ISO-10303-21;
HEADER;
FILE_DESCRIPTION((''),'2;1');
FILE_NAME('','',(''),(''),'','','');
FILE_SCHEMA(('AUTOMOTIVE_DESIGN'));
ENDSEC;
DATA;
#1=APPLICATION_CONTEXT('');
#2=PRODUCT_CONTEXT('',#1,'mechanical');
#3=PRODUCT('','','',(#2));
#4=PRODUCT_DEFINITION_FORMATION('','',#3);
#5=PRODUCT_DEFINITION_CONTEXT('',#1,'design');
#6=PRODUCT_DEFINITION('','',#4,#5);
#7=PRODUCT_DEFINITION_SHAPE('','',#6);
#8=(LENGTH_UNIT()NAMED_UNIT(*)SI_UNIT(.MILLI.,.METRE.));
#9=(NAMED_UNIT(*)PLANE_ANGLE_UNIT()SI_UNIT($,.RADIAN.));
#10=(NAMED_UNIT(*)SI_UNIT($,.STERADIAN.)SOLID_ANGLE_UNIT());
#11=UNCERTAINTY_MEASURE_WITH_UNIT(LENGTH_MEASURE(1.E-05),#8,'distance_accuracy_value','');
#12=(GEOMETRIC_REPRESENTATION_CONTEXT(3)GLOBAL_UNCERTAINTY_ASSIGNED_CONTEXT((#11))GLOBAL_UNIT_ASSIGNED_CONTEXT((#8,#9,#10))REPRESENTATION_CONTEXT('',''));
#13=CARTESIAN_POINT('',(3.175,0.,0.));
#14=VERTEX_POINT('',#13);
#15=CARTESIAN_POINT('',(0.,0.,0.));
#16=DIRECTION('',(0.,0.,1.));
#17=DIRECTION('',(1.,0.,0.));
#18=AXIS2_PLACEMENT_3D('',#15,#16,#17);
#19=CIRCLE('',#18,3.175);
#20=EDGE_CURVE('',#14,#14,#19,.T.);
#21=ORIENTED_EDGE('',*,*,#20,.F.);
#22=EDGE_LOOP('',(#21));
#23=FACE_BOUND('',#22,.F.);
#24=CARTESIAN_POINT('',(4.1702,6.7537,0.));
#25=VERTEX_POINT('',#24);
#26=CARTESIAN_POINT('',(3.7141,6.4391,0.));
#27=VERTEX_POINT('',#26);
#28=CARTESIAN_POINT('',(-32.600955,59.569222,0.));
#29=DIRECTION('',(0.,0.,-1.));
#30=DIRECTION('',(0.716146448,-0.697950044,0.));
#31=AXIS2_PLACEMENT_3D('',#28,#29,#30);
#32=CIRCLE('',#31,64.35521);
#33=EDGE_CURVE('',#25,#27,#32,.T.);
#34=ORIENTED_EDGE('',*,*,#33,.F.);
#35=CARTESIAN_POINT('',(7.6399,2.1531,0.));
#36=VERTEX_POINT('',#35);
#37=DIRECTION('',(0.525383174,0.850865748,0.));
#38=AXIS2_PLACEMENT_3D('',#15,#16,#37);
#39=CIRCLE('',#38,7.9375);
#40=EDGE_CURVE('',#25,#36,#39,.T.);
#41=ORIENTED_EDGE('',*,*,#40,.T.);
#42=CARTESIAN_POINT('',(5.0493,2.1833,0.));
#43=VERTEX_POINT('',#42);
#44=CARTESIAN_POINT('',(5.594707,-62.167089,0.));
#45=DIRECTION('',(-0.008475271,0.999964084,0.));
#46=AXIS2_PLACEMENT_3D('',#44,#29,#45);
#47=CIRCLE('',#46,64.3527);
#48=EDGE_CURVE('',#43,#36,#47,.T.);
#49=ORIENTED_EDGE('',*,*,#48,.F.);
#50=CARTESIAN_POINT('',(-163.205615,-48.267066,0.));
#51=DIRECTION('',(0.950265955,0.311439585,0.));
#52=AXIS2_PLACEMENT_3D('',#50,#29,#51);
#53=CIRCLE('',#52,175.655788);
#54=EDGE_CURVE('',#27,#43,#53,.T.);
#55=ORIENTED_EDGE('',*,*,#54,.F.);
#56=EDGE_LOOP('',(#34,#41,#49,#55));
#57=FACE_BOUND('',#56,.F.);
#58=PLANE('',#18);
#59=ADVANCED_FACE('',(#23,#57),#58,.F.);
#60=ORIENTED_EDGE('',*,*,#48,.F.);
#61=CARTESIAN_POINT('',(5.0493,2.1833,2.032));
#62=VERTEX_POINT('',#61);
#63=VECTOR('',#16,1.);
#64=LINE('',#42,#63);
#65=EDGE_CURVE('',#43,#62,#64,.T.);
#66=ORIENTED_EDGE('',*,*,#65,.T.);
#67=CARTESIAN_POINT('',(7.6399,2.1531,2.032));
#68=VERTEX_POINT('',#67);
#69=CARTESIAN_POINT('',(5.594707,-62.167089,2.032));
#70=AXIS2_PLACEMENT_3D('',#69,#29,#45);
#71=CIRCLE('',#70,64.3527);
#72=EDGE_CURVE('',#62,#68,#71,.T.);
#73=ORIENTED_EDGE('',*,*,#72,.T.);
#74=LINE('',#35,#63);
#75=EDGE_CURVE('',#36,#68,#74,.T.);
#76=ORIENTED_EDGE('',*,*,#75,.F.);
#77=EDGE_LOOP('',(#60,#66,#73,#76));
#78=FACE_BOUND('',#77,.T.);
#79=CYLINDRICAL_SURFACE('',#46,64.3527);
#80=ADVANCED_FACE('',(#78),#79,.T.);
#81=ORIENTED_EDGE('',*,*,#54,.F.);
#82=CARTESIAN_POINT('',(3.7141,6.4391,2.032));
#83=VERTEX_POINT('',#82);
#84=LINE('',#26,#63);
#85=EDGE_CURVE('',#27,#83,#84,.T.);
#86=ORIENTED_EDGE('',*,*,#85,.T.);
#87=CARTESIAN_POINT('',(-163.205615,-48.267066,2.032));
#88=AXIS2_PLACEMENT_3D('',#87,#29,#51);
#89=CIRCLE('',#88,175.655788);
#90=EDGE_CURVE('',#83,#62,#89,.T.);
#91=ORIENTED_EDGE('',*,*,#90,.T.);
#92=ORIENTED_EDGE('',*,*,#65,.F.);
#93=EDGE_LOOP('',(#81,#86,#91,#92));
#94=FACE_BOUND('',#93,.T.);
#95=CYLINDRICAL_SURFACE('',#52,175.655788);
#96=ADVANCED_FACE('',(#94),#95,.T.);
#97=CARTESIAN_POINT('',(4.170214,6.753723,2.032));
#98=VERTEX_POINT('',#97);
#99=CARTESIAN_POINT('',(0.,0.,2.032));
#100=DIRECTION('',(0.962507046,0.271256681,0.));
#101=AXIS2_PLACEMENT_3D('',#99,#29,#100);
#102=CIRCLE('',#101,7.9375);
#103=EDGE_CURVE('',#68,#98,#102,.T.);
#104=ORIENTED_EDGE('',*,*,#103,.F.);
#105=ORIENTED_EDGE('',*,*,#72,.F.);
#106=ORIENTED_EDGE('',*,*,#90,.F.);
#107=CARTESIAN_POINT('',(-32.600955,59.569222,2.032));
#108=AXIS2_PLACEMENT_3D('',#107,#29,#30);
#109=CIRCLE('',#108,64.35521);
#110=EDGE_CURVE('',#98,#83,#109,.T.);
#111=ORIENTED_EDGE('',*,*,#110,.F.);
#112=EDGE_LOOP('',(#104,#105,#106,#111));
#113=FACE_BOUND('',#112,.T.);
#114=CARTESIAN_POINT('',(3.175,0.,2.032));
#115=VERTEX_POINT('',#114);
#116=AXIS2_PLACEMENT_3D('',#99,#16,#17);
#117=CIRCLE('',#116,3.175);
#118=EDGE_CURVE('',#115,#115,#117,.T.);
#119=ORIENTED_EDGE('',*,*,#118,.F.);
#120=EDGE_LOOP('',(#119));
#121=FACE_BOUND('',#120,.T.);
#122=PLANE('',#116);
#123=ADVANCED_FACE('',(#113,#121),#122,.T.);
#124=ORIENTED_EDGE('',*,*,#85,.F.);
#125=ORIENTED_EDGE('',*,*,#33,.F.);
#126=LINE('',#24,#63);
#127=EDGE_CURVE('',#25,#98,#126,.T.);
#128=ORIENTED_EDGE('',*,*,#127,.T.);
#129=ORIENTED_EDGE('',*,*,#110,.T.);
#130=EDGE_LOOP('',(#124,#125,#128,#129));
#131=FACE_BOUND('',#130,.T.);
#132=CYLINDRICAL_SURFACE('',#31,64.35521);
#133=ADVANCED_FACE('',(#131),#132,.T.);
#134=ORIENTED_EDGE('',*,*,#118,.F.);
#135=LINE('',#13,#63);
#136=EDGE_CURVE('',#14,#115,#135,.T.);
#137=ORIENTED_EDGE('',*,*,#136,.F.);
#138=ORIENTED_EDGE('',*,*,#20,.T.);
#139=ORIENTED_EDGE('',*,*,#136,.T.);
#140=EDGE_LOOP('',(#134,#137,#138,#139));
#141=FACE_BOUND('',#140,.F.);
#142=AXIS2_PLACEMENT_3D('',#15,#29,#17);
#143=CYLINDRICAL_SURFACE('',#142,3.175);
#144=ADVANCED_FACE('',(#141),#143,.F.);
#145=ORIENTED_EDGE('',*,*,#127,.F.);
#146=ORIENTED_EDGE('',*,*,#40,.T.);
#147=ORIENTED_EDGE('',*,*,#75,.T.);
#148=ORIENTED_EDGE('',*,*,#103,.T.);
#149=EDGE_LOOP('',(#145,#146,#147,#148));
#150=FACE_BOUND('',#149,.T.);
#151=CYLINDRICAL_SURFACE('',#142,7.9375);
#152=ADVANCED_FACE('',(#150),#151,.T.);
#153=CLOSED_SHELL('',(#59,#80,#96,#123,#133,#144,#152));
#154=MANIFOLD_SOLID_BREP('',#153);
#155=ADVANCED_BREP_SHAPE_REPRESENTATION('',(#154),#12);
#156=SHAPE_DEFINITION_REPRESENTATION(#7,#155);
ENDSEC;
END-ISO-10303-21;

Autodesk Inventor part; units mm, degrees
ref_plane "YZ Plane" through (0, 0, 0) normal (1, 0, 0) x (0, 1, 0)
ref_plane "XZ Plane" through (0, 0, 0) normal (0, 1, 0) x (-1, 0, 0)
ref_plane "XY Plane" through (0, 0, 0) normal (0, 0, 1) x (1, 0, 0)
sketch "Sketch1" plane through (0, 0, 0) normal (0, 0, 1) x (1, 0, 0)
  circle A0 centre (0, 0) radius 7.9375
  circle A1 centre (0, 0) radius 3.175
  dimension "d0" = 15.875
  dimension "d1" = 6.35
extrude "Extrusion1" add sketch "Sketch1" along normal blind 2.032
sketch "Sketch2" plane through (0, 0, 0) normal (0, 0, -1) x (-1, 0, 0)
  circle A0 centre (0, 0) radius 7.9375 construction
  arc A1 (-5.0493, 2.1833) -> (-17.7625, 1.0248) centre (-5.5945, -62.1721) ccw projected
  arc A2 (-3.7141, 6.4391) -> (-5.0493, 2.1833) centre (163.5858, -48.389) ccw projected
  arc A3 (-13.4868, 14.6525) -> (-3.7141, 6.4391) centre (32.6027, 59.5711) ccw projected
  arc A4 (-4.1702, 6.7537) -> (-7.6399, 2.1531) centre (0, 0) ccw
extrude "Extrusion2" cut sketch "Sketch2" against normal blind 25.4
properties part number "Gear Washer Spacer 2" material "Steel"
